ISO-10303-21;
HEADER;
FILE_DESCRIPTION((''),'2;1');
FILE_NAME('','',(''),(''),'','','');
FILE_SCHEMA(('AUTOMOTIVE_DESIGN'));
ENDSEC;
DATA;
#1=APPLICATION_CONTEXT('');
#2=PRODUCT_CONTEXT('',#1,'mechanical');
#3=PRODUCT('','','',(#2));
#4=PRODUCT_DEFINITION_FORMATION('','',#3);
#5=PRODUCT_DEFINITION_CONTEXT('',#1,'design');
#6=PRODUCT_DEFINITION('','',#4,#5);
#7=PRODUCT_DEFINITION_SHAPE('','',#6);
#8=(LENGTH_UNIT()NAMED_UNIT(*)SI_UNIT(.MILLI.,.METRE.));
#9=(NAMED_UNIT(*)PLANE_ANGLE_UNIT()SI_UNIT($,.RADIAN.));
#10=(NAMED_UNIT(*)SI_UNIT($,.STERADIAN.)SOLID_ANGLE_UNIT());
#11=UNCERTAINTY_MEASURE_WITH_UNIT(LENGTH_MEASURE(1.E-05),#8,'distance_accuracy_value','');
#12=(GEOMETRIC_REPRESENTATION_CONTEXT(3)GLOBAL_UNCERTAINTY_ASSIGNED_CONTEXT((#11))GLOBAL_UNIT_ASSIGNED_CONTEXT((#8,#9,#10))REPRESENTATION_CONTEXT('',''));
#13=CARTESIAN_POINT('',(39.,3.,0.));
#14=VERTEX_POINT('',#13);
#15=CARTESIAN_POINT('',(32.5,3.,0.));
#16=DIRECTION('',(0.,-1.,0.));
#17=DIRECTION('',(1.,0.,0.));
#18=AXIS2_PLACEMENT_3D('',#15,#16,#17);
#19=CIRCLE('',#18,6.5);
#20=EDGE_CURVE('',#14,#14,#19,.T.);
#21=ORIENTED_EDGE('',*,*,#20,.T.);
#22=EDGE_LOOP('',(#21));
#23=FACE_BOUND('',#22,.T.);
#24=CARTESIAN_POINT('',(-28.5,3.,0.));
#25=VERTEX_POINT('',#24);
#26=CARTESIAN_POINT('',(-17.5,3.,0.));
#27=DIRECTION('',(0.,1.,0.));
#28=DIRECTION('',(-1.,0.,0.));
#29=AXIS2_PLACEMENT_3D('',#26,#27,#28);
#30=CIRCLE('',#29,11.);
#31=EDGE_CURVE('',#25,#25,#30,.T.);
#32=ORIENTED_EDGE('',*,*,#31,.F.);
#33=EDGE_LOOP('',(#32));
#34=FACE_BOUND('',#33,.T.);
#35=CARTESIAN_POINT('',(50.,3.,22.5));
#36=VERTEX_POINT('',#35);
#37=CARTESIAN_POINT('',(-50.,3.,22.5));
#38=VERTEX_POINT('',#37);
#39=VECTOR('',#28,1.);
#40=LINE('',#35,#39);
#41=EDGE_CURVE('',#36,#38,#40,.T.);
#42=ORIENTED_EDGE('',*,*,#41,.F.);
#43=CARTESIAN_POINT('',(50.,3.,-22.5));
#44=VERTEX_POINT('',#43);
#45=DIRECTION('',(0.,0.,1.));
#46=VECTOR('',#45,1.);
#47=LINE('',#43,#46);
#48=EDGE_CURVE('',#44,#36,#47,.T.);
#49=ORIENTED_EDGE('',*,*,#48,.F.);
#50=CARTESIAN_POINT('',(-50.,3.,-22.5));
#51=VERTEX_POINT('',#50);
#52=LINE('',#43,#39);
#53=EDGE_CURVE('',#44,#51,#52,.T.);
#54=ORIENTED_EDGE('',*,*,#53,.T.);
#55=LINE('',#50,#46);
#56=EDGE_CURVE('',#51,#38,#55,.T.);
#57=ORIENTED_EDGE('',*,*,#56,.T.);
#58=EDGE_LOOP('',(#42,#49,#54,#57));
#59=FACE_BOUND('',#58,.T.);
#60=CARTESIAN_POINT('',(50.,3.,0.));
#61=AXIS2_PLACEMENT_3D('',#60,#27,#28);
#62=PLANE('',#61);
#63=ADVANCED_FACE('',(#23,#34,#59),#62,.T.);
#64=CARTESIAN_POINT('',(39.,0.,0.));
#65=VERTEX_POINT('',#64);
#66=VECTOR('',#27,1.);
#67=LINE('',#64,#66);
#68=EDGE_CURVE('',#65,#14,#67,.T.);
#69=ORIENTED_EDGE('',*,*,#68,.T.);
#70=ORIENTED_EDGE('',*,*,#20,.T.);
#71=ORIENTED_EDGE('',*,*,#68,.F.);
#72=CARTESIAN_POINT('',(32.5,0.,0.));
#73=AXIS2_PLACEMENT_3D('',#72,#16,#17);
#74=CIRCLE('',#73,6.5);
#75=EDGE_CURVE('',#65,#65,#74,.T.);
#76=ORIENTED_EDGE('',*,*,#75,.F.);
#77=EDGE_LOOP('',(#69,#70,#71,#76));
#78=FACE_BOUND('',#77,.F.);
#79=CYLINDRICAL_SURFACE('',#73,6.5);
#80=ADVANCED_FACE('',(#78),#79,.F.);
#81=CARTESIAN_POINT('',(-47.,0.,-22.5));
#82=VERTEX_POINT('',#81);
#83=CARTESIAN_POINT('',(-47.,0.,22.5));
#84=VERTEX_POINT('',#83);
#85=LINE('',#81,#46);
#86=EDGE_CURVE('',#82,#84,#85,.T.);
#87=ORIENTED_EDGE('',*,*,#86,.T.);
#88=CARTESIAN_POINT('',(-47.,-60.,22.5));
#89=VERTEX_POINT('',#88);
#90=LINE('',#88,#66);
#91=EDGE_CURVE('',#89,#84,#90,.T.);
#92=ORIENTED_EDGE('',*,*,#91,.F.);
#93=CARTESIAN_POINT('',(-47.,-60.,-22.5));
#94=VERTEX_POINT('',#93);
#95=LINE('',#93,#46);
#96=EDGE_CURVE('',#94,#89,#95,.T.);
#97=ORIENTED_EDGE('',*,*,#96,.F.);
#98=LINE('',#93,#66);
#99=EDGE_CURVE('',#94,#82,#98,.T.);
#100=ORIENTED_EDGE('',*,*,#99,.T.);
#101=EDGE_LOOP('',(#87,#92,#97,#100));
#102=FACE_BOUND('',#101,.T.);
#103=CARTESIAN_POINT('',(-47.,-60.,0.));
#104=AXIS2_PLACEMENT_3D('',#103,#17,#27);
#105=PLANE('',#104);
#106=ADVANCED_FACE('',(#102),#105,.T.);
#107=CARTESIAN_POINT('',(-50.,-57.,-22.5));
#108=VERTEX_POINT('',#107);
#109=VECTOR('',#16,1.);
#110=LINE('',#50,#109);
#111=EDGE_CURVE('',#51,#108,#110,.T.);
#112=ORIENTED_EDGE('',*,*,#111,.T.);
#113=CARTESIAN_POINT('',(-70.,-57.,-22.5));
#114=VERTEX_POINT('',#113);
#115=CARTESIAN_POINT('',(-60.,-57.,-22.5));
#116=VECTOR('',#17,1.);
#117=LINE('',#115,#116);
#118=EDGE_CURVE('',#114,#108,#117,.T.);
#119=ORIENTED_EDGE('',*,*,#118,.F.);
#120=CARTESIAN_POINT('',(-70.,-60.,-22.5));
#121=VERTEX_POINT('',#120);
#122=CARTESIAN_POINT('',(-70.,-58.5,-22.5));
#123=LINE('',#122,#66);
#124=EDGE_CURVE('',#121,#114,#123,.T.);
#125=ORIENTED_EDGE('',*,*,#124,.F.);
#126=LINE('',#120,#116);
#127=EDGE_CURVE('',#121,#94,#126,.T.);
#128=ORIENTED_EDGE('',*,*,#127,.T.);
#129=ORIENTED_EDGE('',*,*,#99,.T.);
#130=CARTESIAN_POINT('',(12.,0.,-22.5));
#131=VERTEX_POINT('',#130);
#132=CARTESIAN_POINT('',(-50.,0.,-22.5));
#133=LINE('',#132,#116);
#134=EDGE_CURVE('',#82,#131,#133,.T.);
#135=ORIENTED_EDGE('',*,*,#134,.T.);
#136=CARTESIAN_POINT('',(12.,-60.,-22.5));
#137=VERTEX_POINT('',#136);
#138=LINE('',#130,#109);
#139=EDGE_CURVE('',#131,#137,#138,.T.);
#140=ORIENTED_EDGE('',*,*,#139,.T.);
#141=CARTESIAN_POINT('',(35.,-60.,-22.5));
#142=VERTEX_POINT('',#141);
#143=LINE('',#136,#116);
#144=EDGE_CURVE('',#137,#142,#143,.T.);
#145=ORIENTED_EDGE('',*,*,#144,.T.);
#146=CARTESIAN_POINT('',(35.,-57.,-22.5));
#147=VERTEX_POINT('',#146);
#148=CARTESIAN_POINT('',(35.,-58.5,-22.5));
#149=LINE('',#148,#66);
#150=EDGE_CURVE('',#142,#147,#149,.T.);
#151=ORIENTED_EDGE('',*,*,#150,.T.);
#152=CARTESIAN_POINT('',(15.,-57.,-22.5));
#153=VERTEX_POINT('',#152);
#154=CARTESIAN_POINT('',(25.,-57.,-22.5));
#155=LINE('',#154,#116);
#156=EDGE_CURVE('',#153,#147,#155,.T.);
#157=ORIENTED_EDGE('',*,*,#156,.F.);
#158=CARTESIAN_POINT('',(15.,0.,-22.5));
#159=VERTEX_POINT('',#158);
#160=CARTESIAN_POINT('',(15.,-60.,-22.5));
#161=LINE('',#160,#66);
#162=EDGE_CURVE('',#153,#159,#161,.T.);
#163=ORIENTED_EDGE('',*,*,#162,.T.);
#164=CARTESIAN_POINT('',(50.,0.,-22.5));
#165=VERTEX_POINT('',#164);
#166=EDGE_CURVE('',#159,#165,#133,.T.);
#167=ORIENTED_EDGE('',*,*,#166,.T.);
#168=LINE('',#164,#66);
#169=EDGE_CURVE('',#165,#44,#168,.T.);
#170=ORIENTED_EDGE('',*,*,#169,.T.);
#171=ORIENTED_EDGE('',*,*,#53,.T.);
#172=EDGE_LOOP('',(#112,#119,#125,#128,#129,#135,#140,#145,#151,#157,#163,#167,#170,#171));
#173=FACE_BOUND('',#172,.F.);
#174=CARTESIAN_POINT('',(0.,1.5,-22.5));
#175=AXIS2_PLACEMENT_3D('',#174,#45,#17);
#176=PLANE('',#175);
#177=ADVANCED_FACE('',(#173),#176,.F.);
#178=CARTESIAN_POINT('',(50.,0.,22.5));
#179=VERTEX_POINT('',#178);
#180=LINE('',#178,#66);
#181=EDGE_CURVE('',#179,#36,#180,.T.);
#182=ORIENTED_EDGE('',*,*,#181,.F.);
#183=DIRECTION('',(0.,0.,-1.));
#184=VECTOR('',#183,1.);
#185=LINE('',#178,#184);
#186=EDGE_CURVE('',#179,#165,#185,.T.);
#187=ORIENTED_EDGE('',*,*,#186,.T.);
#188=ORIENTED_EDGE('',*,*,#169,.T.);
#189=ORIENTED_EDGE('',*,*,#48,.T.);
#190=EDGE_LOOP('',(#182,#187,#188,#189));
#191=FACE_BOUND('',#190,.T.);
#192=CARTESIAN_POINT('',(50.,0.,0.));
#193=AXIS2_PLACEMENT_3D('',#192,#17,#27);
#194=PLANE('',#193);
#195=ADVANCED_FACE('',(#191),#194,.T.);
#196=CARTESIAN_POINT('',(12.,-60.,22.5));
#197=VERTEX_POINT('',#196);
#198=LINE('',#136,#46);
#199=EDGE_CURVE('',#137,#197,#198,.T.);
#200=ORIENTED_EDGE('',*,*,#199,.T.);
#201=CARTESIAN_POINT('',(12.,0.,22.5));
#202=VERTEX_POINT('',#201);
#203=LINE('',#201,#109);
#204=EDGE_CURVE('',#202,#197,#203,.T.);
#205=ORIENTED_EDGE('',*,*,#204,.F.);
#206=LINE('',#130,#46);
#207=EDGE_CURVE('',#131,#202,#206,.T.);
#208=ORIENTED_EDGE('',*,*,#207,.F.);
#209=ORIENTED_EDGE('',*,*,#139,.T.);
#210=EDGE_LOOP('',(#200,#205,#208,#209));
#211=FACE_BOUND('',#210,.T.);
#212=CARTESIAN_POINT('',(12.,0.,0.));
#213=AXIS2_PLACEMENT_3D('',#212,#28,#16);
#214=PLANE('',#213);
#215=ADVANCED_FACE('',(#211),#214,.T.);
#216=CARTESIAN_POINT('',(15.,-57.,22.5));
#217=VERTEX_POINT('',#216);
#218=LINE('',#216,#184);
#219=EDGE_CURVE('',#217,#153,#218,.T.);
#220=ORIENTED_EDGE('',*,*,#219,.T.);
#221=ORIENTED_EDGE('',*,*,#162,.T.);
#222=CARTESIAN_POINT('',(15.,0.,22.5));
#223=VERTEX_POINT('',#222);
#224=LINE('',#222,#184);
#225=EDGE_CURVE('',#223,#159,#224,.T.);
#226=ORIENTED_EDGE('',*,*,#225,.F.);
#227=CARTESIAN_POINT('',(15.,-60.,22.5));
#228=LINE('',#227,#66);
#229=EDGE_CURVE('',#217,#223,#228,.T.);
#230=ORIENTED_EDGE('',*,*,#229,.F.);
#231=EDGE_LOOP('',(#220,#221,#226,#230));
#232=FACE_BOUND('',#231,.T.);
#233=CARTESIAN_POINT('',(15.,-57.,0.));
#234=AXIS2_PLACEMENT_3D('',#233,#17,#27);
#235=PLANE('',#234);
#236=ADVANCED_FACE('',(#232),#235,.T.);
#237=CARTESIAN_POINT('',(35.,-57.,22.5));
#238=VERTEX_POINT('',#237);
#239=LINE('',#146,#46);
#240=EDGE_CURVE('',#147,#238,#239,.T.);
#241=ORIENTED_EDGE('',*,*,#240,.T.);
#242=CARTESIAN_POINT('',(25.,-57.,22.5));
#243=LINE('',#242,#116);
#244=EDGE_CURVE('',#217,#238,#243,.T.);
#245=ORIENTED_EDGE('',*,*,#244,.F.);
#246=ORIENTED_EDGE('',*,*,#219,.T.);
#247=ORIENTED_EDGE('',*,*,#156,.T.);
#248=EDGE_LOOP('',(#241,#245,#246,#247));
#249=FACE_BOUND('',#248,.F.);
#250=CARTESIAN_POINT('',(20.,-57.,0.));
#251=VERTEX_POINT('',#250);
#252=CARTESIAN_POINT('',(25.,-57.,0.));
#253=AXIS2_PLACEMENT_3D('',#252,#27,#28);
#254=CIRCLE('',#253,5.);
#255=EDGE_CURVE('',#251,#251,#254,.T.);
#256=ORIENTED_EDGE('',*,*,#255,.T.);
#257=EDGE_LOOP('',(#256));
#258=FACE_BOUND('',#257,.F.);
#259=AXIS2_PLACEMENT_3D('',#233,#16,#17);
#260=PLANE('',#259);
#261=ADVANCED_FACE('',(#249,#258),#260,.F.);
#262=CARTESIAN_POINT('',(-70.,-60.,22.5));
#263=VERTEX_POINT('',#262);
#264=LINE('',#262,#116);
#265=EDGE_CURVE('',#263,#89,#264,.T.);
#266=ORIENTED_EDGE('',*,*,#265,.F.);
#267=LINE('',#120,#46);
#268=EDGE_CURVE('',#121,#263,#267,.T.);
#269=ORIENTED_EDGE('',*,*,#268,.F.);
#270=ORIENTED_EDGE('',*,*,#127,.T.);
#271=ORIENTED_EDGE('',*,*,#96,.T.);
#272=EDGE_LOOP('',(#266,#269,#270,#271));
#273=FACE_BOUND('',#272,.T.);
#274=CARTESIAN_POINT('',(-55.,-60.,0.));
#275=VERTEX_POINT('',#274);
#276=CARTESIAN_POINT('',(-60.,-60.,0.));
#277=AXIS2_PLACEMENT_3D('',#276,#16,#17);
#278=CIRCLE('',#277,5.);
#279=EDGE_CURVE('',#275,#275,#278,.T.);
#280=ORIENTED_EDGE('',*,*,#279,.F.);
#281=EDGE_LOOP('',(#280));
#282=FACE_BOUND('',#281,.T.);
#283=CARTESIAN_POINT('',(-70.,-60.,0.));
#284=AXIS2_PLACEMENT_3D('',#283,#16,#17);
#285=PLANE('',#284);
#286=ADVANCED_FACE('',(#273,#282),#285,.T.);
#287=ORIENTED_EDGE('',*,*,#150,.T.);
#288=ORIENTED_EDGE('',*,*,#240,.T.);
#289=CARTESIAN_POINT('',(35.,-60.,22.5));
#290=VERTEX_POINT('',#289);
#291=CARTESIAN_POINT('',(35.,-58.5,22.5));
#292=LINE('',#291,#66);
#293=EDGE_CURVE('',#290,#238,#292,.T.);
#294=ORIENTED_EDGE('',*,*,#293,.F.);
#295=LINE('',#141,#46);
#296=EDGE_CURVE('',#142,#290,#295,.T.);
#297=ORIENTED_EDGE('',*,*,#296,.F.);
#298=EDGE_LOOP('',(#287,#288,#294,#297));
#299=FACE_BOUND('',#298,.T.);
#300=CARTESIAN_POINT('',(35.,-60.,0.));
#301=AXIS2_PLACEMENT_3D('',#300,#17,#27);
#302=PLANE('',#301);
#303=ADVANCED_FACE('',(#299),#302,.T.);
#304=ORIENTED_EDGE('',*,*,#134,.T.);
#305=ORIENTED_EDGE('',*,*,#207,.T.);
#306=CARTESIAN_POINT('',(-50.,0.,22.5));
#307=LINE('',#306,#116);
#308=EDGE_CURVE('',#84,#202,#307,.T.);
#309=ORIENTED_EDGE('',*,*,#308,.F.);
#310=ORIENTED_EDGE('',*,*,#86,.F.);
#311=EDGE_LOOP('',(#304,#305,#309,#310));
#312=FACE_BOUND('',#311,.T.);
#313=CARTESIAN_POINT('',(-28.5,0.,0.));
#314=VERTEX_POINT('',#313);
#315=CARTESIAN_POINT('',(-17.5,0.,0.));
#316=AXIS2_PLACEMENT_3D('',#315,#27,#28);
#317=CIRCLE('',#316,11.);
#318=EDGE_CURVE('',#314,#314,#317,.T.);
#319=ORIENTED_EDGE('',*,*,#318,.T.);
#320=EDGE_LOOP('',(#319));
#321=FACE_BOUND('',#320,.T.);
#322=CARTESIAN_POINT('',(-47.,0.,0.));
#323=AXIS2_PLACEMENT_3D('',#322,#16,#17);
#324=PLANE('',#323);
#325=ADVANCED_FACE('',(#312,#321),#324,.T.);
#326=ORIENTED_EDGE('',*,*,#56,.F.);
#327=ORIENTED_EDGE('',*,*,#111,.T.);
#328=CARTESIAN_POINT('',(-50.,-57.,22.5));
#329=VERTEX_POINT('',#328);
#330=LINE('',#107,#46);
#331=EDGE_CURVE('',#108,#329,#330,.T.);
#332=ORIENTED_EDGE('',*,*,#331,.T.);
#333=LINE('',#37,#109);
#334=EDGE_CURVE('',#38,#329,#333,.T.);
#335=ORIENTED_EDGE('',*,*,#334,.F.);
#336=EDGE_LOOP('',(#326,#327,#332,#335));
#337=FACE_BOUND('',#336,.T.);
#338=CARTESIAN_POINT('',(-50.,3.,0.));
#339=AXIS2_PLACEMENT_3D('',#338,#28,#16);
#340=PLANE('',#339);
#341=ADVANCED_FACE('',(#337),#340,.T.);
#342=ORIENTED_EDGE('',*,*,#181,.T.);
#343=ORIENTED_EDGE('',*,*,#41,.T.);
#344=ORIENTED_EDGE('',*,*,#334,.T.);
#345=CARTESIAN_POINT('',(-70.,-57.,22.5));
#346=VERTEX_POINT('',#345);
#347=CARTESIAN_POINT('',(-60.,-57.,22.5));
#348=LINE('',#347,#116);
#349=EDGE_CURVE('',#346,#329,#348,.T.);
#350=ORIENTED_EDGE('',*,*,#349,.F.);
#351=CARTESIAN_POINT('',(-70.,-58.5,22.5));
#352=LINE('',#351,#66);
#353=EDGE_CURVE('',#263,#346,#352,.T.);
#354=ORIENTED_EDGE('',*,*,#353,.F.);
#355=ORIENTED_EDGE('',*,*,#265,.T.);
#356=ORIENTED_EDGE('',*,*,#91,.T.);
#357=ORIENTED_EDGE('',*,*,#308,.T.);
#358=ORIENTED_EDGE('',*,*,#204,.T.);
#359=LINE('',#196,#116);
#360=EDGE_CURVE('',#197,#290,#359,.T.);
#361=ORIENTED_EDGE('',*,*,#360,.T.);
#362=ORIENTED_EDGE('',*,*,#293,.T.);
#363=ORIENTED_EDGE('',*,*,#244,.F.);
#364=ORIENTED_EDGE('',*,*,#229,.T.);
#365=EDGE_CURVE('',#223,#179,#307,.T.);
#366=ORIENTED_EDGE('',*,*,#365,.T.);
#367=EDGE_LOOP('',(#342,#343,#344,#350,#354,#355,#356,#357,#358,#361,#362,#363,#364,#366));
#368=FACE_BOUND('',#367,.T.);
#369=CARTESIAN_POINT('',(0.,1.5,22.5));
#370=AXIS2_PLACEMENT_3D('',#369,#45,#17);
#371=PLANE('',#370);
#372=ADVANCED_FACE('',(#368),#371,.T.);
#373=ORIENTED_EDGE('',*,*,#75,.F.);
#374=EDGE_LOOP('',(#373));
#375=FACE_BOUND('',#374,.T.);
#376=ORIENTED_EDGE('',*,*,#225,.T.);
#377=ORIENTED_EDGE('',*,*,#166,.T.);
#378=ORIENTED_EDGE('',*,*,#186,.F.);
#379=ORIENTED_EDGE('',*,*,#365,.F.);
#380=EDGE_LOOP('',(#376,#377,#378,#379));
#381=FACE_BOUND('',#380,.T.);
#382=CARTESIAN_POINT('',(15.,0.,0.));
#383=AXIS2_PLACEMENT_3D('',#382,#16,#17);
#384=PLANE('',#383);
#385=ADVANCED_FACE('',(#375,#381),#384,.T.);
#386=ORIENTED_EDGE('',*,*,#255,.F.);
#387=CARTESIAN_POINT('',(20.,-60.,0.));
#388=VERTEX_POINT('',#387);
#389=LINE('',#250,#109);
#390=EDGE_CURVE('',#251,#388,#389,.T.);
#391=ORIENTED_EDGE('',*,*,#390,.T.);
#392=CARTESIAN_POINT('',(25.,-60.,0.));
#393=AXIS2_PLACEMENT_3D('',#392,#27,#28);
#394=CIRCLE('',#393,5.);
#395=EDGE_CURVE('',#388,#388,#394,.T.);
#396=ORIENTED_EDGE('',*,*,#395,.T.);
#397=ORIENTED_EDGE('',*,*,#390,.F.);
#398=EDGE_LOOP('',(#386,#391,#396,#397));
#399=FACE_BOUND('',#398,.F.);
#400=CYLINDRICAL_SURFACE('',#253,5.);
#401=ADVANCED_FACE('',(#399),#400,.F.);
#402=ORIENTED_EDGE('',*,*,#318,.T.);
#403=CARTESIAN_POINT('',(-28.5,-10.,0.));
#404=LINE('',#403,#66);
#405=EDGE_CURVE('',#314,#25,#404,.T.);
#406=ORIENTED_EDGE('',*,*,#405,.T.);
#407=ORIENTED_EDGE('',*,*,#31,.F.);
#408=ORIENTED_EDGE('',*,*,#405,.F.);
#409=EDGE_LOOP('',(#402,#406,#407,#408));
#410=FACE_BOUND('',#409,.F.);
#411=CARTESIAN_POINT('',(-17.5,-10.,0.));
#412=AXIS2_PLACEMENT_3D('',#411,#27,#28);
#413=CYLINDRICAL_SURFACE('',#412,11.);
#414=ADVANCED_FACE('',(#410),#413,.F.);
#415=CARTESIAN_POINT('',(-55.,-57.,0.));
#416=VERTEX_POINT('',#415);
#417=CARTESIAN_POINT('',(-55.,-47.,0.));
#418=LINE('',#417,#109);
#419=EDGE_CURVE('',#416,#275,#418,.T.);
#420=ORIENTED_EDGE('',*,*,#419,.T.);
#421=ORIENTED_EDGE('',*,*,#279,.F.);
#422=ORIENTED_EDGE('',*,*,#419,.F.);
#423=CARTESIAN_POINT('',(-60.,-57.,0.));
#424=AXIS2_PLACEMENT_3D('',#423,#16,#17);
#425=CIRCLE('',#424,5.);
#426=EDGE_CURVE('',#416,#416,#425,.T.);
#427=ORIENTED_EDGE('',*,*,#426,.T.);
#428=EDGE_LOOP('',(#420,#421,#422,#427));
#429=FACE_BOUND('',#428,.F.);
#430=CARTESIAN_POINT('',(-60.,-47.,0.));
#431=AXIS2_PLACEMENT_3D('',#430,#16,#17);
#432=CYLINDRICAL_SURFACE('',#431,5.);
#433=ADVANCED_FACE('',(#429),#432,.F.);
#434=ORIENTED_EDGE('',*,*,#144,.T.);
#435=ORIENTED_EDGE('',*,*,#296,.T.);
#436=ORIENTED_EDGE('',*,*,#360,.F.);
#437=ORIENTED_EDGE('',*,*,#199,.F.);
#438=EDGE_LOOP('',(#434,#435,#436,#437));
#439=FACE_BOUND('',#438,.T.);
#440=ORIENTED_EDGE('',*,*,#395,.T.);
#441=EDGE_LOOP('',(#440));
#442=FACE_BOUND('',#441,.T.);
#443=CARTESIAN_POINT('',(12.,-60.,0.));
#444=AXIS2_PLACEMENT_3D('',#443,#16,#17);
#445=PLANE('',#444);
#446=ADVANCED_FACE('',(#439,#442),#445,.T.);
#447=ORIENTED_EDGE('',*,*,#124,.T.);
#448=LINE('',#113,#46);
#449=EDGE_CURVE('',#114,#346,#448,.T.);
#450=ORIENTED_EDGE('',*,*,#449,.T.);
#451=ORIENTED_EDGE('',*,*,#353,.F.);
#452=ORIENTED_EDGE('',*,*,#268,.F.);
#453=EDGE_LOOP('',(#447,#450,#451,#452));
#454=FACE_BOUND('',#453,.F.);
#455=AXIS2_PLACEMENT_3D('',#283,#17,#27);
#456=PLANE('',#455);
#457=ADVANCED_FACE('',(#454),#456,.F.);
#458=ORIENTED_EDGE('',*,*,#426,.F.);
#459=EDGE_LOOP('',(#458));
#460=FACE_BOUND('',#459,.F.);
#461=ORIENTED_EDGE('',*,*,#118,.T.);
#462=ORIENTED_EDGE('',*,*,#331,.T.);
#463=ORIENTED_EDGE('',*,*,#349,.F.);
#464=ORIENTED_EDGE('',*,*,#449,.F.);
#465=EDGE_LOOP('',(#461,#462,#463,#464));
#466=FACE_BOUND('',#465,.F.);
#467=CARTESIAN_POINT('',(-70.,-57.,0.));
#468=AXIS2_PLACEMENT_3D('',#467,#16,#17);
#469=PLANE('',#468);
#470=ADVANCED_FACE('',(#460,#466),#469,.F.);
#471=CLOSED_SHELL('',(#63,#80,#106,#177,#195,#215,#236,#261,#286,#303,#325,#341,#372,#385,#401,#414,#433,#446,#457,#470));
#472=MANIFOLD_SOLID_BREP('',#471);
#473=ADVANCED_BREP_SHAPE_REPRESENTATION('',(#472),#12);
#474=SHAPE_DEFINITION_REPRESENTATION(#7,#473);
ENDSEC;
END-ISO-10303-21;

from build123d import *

# Parameters (mm, degrees)
F0_W           = 20
F0_H           = 3
F2_DEPTH       = 22.5
F3_D           = 13
F3_DEPTH       = 10
F3_TIP         = 3.9055940237
F4_D           = 22
F4_DEPTH       = 10
F4_TIP         = 6.6094668093
F7_D           = 10
F7_DEPTH       = 10
F7_TIP         = 3.0043030951
F7_ON_F5_D     = 10
F7_ON_F5_DEPTH = 10
F7_ON_F5_TIP   = 3.0043030951


# Not quite as in the source:
# - a feature names something its author has since deleted; it is built from what else it names


with BuildPart() as f2:
    # F0 (on Top) → F2 (new body, symmetric)
    with BuildSketch(Plane.XY):
        Polygon((-47, 0), (0, 0), (12, 0), (15, 0), (50, 0), (50, 3), (-50, 3), (-50, 0), align=None)
        Polygon((15, 0), (12, 0), (12, -60), (15, -60), (15, -57), align=None)
        Polygon((-47, -60), (-47, 0), (-50, 0), (-50, -57), (-50, -60), align=None)
        with Locations((-60, -58.5)):
            Rectangle(F0_W, F0_H)
        with Locations((25, -58.5)):
            Rectangle(F0_W, F0_H)
    extrude(amount=F2_DEPTH, both=True)

    # F3 (one way)
    with BuildSketch(Plane.XZ):
        with Locations((32.5, 0)):
            Circle(F3_D / 2)
    extrude(amount=-F3_DEPTH, mode=Mode.SUBTRACT)
    with Locations(Plane.XZ):
        with Locations((32.5, 0)):
            with Locations((0, 0, -(F3_DEPTH + F3_TIP / 2))):  # 118° drill point
                Cone(0, F3_D / 2, F3_TIP, mode=Mode.SUBTRACT)

    # F4
    with Locations(Plane.XZ):
        with Locations((-17.5, 0)):
            Hole(F4_D / 2, depth=F4_DEPTH)
            with Locations((0, 0, -(F4_DEPTH + F4_TIP / 2))):  # 118° drill point
                Cone(0, F4_D / 2, F4_TIP, mode=Mode.SUBTRACT)

    # F7 (one way)
    with BuildSketch(Plane(origin=(0, -57, 0), x_dir=(-1, 0, 0), z_dir=(0, 1, 0))):
        with Locations((-25, 0)):
            Circle(F7_D / 2)
    extrude(amount=-F7_DEPTH, mode=Mode.SUBTRACT)
    with Locations(Plane(origin=(0, -57, 0), x_dir=(-1, 0, 0), z_dir=(0, 1, 0))):
        with Locations((-25, 0)):
            with Locations((0, 0, -(F7_DEPTH + F7_TIP / 2))):  # 118° drill point
                Cone(0, F7_D / 2, F7_TIP, mode=Mode.SUBTRACT)

    # F7 on F5
    with Locations(Plane(origin=(0, -57, 0), x_dir=(-1, 0, 0), z_dir=(0, 1, 0))):
        with Locations((60, 0)):
            Hole(F7_ON_F5_D / 2, depth=F7_ON_F5_DEPTH)
            with Locations((0, 0, -(F7_ON_F5_DEPTH + F7_ON_F5_TIP / 2))):  # 118° drill point
                Cone(0, F7_ON_F5_D / 2, F7_ON_F5_TIP, mode=Mode.SUBTRACT)


solid = f2.part
